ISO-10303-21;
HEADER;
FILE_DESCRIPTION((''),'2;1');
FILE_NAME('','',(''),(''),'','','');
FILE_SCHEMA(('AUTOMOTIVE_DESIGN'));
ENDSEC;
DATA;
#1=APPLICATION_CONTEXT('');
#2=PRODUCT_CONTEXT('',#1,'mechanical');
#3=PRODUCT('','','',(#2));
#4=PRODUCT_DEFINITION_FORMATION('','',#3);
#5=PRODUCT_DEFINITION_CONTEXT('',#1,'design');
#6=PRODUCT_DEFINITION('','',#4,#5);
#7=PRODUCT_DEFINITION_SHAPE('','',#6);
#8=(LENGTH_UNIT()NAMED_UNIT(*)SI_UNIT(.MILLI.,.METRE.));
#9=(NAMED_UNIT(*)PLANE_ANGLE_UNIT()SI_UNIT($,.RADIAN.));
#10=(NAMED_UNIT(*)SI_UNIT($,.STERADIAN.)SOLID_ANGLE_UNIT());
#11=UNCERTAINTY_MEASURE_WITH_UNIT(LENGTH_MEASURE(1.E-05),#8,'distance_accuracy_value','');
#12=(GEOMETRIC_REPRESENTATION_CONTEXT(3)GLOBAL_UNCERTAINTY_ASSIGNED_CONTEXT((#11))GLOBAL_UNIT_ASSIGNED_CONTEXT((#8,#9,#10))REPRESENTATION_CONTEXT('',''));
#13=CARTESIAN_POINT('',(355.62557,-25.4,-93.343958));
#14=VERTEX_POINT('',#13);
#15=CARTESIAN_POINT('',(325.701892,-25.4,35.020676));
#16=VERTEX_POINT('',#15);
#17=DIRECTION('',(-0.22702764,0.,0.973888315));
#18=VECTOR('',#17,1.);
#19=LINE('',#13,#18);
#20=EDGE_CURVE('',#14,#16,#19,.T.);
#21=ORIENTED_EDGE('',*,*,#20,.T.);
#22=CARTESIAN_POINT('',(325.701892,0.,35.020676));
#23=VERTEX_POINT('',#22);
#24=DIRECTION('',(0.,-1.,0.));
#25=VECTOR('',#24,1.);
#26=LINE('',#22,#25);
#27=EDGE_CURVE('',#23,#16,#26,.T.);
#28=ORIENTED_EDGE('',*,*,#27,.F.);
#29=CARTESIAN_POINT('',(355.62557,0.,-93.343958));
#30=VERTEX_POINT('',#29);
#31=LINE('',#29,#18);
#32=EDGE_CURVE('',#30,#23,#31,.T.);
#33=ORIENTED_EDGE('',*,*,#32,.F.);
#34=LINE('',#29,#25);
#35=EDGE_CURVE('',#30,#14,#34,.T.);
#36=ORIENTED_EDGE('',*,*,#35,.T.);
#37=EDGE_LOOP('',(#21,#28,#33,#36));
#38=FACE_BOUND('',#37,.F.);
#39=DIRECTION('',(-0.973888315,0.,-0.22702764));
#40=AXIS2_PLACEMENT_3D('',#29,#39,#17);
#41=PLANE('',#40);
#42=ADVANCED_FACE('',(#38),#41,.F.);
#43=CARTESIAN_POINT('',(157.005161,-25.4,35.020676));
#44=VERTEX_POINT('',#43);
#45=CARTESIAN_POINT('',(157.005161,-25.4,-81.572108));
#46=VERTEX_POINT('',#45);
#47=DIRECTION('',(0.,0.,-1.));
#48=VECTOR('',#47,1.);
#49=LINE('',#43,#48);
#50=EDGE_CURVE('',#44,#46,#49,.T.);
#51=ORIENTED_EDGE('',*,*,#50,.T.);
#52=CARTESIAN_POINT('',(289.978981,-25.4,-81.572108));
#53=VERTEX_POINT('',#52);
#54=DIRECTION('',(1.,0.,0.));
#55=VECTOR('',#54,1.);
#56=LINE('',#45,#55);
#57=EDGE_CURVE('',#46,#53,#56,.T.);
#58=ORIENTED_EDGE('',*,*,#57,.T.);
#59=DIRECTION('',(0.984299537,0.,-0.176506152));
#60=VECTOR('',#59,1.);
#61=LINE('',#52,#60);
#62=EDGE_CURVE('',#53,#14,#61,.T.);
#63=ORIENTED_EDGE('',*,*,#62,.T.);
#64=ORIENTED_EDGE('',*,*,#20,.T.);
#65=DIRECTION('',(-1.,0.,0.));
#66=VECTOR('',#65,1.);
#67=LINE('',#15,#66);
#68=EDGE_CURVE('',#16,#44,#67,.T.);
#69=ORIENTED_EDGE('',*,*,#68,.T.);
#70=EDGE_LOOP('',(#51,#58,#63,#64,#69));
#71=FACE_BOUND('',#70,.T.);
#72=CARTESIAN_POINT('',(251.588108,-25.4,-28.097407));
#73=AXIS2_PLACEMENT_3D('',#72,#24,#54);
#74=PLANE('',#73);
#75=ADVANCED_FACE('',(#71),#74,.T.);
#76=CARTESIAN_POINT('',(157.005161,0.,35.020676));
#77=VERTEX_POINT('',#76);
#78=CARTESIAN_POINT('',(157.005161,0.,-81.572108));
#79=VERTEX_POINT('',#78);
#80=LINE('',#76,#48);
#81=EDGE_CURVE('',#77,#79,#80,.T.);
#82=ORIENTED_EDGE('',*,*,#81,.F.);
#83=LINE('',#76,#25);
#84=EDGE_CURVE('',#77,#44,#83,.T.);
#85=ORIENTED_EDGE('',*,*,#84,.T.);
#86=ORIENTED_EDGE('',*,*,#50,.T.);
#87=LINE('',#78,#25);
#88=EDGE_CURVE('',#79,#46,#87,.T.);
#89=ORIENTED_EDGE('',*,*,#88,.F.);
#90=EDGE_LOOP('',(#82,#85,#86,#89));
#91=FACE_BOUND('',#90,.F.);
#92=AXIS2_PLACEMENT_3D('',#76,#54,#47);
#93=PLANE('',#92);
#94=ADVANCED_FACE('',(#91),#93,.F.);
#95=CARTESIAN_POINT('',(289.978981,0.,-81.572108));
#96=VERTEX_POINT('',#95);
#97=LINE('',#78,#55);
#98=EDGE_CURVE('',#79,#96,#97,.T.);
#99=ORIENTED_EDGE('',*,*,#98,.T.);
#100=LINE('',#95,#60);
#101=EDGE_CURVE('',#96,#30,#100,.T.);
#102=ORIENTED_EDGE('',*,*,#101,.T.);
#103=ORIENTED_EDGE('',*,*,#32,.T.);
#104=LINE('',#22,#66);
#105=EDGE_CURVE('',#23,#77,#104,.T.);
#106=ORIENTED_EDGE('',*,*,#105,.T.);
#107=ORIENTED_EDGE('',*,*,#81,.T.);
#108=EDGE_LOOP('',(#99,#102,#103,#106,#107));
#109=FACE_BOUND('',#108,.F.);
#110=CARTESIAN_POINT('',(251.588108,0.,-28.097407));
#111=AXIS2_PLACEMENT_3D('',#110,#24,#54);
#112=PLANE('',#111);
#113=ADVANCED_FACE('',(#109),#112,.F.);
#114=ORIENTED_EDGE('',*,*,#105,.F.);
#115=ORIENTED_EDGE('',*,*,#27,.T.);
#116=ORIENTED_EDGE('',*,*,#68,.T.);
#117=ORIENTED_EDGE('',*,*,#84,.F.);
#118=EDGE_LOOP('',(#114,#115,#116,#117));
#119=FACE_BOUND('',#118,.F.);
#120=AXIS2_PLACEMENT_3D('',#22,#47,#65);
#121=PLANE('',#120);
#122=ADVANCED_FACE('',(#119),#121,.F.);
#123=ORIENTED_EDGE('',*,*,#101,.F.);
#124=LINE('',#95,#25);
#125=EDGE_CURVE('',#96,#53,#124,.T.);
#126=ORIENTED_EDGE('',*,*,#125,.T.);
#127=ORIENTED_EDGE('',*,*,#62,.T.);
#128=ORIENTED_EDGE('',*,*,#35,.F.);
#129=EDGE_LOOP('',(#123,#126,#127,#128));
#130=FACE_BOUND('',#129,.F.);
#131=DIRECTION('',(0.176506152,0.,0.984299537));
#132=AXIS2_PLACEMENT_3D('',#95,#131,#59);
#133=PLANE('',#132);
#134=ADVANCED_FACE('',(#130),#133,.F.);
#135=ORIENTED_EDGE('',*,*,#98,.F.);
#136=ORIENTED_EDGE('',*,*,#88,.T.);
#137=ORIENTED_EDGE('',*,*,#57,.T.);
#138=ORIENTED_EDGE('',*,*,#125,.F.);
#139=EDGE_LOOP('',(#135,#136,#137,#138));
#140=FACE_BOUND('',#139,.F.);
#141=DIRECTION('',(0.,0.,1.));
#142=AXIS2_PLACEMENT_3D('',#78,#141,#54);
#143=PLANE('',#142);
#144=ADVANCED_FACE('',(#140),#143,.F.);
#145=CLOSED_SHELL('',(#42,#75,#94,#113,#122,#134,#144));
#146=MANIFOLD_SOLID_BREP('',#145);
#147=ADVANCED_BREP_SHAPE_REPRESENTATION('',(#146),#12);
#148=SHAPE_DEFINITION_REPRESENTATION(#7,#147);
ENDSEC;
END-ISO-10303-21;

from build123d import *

# Parameters (mm, degrees)
F3_DEPTH = 25.4


# Not quite as in the source:
# - the program builds the solid bodies; features that only make, move or delete a surface that nothing else refers to are left out


with BuildPart() as f3:
    # F2 (on Front) → F3 (new body)
    with BuildSketch(Plane.XZ):
        Polygon((157.005161047, -81.5721079707), (289.9789810181, -81.5721079707), (355.6255698204, -93.3439582586), (325.7018923759, 35.0206755102), (157.005161047, 35.0206755102), align=None)
    extrude(amount=F3_DEPTH)


solid = f3.part
